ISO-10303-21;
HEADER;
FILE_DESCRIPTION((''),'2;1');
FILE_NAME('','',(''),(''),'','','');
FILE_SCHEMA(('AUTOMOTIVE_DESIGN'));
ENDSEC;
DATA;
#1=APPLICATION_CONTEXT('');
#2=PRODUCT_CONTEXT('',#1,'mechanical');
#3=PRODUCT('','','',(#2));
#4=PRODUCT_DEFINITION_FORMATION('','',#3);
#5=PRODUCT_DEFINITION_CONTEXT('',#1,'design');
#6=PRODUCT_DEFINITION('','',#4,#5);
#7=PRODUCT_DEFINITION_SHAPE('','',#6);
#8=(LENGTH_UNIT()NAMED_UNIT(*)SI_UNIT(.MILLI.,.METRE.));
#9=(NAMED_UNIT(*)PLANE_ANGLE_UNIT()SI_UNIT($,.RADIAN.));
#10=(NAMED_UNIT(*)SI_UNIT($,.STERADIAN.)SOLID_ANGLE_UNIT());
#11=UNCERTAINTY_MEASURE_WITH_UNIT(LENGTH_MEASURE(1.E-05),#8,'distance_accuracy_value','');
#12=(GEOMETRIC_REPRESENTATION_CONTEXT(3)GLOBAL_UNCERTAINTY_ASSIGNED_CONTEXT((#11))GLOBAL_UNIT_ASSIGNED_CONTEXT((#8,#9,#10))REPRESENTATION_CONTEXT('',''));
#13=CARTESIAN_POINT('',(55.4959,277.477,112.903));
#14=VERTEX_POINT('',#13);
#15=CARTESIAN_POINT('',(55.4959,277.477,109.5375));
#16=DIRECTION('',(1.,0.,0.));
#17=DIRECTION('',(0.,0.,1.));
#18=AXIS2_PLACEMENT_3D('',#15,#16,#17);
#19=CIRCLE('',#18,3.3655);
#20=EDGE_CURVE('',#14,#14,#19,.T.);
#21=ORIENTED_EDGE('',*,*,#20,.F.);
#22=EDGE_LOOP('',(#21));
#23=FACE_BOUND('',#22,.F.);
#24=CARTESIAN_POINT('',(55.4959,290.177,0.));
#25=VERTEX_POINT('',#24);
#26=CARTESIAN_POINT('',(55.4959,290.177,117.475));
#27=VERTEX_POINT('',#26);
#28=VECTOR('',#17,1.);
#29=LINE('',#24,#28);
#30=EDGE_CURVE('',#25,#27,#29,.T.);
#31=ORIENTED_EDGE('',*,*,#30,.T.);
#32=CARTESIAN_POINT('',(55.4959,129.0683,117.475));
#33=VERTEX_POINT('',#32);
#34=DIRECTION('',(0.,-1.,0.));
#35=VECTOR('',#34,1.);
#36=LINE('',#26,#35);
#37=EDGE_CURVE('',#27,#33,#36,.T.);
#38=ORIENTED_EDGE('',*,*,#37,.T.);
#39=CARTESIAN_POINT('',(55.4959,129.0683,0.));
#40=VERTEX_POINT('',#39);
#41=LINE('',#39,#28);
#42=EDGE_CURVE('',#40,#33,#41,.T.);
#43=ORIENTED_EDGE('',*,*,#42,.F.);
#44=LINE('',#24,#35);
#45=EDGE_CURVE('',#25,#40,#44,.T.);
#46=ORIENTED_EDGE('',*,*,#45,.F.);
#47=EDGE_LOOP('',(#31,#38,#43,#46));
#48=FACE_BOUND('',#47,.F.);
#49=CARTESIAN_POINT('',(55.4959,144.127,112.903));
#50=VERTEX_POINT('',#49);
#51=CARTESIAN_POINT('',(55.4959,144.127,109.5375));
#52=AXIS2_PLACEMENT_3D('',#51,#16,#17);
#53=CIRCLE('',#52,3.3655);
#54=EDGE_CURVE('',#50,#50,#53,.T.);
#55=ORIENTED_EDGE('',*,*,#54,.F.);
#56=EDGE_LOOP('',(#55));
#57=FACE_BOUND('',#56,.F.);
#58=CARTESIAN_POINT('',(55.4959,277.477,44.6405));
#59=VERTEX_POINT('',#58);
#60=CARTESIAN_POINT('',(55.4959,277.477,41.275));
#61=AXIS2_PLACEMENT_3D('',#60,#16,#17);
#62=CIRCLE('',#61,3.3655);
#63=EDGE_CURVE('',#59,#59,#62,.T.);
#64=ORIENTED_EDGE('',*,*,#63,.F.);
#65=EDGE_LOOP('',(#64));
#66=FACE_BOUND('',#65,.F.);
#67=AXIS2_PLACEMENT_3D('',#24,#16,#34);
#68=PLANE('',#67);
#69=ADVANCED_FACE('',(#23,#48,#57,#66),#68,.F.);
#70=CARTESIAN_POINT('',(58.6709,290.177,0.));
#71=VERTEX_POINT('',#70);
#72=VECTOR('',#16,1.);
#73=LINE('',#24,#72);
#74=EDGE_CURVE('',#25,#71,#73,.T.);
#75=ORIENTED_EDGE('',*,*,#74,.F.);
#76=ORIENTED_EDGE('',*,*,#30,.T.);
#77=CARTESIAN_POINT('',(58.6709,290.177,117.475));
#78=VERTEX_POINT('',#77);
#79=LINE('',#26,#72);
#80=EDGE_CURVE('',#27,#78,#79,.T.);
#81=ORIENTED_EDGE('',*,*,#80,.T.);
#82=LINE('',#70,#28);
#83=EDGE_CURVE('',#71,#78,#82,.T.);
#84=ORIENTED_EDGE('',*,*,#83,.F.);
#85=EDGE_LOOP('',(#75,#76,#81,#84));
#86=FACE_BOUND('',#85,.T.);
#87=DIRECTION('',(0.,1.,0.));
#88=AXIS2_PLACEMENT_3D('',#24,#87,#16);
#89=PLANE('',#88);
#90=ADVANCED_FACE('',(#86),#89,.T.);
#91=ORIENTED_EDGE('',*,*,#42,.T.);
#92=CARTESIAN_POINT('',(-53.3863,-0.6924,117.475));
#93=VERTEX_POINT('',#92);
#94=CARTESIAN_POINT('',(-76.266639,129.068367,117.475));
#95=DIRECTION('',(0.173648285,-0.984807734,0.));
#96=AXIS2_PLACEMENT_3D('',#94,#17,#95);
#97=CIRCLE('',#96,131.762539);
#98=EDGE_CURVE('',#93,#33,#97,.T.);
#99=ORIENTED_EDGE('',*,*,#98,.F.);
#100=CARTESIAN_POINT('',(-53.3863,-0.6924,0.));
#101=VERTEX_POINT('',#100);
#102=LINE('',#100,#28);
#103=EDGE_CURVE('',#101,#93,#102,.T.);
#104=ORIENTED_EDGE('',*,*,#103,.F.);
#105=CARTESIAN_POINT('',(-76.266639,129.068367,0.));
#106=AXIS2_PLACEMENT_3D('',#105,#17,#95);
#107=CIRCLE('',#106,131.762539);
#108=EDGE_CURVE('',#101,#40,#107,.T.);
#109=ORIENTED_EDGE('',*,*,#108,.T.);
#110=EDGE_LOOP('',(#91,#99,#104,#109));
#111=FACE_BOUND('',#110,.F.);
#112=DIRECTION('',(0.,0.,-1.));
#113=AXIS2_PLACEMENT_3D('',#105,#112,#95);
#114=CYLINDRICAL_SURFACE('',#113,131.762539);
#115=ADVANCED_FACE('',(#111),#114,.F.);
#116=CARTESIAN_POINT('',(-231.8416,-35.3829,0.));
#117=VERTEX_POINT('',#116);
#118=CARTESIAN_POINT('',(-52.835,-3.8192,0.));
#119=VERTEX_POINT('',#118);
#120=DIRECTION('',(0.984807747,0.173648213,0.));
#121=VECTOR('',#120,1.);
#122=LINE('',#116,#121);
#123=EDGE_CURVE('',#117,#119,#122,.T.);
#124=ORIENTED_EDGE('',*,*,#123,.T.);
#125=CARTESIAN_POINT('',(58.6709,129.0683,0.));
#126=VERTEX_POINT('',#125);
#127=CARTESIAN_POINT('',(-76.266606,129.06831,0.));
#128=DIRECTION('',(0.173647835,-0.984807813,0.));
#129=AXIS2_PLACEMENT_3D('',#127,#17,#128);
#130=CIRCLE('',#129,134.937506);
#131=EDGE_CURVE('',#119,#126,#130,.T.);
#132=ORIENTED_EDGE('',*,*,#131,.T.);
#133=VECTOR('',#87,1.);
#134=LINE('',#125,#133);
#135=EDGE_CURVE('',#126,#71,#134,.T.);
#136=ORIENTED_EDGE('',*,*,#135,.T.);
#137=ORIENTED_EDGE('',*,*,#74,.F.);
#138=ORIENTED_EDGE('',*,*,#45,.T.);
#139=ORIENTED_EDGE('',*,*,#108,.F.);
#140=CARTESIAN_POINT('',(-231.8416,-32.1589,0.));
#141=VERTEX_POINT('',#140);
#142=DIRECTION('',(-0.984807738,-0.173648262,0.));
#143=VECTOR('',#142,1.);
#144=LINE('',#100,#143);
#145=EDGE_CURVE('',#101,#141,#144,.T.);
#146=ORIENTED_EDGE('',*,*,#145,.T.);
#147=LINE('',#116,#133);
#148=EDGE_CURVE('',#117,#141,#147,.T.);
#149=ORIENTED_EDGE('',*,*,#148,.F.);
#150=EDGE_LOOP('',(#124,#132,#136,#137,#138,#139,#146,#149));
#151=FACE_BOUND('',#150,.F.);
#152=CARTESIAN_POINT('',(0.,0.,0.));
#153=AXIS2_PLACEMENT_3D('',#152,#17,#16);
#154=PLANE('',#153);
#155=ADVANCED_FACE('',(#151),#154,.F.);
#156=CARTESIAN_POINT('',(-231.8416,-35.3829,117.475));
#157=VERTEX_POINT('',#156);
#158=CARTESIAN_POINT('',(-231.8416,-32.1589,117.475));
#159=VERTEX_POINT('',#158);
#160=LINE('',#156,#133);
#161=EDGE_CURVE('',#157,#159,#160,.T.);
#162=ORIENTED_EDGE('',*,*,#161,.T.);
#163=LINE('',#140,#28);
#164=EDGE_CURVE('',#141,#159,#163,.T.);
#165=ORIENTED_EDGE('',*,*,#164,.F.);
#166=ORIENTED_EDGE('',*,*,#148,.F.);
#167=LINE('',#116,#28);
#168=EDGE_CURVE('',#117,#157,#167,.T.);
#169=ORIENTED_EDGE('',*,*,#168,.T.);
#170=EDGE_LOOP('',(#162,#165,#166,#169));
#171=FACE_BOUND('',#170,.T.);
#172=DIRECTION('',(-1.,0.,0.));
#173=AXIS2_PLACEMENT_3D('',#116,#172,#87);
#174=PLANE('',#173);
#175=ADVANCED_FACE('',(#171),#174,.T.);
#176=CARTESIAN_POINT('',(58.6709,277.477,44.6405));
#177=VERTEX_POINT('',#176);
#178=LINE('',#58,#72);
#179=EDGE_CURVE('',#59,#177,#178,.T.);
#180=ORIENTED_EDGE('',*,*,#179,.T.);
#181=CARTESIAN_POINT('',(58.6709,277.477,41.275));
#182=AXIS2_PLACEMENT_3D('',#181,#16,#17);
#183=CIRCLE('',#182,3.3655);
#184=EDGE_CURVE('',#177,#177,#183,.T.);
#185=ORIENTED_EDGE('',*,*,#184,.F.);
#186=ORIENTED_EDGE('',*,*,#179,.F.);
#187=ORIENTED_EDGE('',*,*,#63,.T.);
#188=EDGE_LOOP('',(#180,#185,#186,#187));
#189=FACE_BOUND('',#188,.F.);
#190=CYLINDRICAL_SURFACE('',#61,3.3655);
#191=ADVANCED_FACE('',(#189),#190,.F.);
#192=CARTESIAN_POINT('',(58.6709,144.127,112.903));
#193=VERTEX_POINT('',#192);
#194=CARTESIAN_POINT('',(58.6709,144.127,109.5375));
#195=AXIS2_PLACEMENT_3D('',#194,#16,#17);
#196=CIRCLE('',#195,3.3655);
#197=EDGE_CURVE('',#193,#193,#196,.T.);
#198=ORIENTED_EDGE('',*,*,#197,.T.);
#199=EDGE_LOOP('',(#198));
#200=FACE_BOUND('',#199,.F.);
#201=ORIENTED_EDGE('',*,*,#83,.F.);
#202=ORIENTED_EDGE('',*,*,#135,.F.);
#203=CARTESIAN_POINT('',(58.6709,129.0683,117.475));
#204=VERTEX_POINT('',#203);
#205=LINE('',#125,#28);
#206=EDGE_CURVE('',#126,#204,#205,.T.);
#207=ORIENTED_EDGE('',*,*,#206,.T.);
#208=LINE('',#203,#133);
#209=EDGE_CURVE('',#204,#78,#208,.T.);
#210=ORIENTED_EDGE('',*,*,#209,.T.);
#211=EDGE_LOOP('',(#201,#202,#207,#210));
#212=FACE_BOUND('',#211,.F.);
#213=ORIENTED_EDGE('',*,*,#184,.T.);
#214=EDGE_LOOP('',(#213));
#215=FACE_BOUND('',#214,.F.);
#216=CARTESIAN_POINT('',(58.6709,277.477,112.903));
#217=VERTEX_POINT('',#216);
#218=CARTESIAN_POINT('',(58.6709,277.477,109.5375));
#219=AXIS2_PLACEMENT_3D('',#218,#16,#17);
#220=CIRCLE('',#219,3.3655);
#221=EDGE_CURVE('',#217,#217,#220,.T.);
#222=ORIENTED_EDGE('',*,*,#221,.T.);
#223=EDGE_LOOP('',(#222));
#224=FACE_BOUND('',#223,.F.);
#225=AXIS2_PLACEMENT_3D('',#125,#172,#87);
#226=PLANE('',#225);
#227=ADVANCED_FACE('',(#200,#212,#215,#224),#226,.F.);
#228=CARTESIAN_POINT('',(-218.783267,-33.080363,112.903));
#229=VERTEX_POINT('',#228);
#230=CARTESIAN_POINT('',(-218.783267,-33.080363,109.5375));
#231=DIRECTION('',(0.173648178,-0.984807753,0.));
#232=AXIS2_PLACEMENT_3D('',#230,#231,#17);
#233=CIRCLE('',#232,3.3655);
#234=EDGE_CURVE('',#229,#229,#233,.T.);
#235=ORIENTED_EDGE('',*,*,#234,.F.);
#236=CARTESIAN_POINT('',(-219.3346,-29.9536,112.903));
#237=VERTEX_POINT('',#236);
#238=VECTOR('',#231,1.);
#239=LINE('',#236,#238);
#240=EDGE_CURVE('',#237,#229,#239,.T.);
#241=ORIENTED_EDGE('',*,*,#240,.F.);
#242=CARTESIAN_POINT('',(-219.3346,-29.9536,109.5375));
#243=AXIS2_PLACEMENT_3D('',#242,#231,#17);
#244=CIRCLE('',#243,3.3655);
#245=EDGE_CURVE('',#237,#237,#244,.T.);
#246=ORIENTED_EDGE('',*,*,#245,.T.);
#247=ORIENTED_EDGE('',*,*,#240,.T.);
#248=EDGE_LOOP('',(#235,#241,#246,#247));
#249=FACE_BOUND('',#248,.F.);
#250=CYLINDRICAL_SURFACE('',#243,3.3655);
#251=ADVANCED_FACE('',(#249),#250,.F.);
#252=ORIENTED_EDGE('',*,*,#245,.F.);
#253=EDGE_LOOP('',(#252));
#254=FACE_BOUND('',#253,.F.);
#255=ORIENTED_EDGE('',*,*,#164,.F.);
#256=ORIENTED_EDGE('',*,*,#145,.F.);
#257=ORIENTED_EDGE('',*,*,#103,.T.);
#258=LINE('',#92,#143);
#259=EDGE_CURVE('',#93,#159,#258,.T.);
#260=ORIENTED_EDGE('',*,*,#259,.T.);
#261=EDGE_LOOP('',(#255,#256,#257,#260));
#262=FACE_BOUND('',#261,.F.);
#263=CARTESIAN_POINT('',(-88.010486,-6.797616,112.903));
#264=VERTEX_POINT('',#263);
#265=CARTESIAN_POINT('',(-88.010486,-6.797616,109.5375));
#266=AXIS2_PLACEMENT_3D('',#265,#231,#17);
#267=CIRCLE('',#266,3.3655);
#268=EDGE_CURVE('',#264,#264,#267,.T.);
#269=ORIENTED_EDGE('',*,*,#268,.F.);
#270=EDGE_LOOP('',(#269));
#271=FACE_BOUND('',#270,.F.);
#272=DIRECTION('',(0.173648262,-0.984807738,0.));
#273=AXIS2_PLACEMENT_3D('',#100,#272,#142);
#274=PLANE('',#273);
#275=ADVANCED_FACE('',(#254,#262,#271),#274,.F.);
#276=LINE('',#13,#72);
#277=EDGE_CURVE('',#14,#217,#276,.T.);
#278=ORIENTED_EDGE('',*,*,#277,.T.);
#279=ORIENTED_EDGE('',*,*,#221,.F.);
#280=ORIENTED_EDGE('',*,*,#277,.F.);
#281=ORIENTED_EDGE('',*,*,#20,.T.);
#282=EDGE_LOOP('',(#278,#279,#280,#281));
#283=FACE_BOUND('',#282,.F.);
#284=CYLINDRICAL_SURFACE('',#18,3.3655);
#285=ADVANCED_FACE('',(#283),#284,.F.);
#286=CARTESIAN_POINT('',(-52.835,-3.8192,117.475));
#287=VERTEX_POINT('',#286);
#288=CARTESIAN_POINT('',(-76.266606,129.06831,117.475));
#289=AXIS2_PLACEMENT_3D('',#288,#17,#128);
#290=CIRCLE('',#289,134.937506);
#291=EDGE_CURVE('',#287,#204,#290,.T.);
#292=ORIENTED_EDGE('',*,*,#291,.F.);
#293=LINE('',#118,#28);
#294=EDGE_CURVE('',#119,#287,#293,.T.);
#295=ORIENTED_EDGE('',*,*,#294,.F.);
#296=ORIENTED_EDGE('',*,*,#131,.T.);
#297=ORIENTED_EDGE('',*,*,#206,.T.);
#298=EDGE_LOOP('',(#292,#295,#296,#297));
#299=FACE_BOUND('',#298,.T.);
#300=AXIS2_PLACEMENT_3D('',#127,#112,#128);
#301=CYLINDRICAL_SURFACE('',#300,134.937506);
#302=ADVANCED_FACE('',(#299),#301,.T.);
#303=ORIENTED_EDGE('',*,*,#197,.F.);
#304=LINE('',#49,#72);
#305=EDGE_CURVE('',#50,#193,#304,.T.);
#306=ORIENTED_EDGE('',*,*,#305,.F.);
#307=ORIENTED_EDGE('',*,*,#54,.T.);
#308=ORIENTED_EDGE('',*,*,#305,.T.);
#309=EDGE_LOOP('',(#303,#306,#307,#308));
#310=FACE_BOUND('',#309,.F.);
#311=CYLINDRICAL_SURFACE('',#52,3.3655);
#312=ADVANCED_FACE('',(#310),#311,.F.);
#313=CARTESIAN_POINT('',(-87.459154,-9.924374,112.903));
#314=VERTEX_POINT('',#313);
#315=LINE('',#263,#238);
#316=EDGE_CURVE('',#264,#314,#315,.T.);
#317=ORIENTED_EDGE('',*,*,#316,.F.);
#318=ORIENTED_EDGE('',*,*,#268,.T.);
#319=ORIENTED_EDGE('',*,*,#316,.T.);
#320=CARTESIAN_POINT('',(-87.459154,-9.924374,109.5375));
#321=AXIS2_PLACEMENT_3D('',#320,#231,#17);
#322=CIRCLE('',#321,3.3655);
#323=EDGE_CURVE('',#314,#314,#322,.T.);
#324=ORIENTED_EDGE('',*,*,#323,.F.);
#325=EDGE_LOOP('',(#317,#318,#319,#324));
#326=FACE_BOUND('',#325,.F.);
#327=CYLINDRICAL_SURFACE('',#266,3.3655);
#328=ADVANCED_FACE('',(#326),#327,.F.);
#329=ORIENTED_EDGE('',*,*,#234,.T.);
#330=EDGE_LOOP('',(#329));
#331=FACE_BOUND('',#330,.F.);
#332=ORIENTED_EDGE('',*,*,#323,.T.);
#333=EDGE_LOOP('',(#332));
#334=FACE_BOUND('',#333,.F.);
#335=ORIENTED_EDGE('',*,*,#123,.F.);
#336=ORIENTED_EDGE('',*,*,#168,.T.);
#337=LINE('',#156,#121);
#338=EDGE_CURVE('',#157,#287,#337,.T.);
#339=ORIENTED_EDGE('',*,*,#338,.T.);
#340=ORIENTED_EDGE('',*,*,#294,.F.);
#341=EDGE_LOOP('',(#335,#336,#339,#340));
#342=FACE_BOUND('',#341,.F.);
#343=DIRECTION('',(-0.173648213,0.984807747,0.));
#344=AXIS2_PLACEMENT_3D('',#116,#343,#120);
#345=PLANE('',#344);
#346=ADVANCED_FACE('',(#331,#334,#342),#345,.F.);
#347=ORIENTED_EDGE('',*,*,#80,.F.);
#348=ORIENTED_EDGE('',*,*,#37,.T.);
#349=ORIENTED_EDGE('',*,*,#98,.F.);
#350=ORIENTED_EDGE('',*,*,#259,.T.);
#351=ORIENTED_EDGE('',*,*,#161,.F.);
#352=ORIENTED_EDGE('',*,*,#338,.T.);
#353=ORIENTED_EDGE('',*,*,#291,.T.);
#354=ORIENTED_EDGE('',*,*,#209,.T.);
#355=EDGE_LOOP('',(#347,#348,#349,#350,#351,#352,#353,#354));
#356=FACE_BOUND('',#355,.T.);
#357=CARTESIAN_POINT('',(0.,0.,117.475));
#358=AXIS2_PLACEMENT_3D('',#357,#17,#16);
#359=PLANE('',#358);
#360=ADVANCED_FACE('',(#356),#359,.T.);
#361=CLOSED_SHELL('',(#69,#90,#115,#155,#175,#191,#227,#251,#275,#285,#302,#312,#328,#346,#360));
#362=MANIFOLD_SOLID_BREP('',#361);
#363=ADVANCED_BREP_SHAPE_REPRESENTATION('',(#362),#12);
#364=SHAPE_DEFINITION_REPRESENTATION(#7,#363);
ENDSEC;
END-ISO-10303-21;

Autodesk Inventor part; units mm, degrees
ref_plane "YZ Plane" through (0, 0, 0) normal (1, 0, 0) x (0, 1, 0)
ref_plane "XZ Plane" through (0, 0, 0) normal (0, 1, 0) x (-1, 0, 0)
ref_plane "XY Plane" through (0, 0, 0) normal (0, 0, 1) x (1, 0, 0)
sketch "Sketch1" plane through (0, 0, 0) normal (0, 0, 1) x (1, 0, 0)
  arc A0 (-53.3863, -0.6924) -> (55.4959, 129.0683) centre (-76.2666, 129.0683) ccw projected
  line L0 (-53.3863, -0.6924) -> (-231.8416, -32.1589) projected
  line L1 (-231.8416, -35.3829) -> (-231.8416, -32.1589) projected
  line L2 (-231.8416, -35.3829) -> (-52.835, -3.8192) projected
  arc A1 (-52.835, -3.8192) -> (58.6709, 129.0683) centre (-76.2666, 129.0683) ccw projected
  line L3 (58.6709, 129.0683) -> (58.6709, 290.177) projected
  line L4 (55.4959, 290.177) -> (58.6709, 290.177) projected
  line L5 (55.4959, 290.177) -> (55.4959, 129.0683) projected
  point P0 (0, 0)
extrude "Extrusion1" add sketch "Sketch1" along normal blind 117.475
hole "Hole1" at (55.4959, 277.477, 109.5375) direction (1, 0, 0) diameter 6.731 depth 25.4 tip angle 118
pattern_linear "Rectangular Pattern1" count 2 spacing 68.2625 along (0, 0, -1) of "Hole1"
pattern_linear "Rectangular Pattern2" count 2 spacing 133.35 along (0, -1, 0) of "Hole1"
hole "Hole2" at (-219.3346, -29.9536, 109.5375) direction (0.1736482, -0.9848078, 0) diameter 6.731 depth 25.4 tip angle 118
pattern_linear "Rectangular Pattern3" count 2 spacing 133.35 along (0.9848078, 0.1736482, 0) of "Hole2"
properties part number "GE-12071-03"
